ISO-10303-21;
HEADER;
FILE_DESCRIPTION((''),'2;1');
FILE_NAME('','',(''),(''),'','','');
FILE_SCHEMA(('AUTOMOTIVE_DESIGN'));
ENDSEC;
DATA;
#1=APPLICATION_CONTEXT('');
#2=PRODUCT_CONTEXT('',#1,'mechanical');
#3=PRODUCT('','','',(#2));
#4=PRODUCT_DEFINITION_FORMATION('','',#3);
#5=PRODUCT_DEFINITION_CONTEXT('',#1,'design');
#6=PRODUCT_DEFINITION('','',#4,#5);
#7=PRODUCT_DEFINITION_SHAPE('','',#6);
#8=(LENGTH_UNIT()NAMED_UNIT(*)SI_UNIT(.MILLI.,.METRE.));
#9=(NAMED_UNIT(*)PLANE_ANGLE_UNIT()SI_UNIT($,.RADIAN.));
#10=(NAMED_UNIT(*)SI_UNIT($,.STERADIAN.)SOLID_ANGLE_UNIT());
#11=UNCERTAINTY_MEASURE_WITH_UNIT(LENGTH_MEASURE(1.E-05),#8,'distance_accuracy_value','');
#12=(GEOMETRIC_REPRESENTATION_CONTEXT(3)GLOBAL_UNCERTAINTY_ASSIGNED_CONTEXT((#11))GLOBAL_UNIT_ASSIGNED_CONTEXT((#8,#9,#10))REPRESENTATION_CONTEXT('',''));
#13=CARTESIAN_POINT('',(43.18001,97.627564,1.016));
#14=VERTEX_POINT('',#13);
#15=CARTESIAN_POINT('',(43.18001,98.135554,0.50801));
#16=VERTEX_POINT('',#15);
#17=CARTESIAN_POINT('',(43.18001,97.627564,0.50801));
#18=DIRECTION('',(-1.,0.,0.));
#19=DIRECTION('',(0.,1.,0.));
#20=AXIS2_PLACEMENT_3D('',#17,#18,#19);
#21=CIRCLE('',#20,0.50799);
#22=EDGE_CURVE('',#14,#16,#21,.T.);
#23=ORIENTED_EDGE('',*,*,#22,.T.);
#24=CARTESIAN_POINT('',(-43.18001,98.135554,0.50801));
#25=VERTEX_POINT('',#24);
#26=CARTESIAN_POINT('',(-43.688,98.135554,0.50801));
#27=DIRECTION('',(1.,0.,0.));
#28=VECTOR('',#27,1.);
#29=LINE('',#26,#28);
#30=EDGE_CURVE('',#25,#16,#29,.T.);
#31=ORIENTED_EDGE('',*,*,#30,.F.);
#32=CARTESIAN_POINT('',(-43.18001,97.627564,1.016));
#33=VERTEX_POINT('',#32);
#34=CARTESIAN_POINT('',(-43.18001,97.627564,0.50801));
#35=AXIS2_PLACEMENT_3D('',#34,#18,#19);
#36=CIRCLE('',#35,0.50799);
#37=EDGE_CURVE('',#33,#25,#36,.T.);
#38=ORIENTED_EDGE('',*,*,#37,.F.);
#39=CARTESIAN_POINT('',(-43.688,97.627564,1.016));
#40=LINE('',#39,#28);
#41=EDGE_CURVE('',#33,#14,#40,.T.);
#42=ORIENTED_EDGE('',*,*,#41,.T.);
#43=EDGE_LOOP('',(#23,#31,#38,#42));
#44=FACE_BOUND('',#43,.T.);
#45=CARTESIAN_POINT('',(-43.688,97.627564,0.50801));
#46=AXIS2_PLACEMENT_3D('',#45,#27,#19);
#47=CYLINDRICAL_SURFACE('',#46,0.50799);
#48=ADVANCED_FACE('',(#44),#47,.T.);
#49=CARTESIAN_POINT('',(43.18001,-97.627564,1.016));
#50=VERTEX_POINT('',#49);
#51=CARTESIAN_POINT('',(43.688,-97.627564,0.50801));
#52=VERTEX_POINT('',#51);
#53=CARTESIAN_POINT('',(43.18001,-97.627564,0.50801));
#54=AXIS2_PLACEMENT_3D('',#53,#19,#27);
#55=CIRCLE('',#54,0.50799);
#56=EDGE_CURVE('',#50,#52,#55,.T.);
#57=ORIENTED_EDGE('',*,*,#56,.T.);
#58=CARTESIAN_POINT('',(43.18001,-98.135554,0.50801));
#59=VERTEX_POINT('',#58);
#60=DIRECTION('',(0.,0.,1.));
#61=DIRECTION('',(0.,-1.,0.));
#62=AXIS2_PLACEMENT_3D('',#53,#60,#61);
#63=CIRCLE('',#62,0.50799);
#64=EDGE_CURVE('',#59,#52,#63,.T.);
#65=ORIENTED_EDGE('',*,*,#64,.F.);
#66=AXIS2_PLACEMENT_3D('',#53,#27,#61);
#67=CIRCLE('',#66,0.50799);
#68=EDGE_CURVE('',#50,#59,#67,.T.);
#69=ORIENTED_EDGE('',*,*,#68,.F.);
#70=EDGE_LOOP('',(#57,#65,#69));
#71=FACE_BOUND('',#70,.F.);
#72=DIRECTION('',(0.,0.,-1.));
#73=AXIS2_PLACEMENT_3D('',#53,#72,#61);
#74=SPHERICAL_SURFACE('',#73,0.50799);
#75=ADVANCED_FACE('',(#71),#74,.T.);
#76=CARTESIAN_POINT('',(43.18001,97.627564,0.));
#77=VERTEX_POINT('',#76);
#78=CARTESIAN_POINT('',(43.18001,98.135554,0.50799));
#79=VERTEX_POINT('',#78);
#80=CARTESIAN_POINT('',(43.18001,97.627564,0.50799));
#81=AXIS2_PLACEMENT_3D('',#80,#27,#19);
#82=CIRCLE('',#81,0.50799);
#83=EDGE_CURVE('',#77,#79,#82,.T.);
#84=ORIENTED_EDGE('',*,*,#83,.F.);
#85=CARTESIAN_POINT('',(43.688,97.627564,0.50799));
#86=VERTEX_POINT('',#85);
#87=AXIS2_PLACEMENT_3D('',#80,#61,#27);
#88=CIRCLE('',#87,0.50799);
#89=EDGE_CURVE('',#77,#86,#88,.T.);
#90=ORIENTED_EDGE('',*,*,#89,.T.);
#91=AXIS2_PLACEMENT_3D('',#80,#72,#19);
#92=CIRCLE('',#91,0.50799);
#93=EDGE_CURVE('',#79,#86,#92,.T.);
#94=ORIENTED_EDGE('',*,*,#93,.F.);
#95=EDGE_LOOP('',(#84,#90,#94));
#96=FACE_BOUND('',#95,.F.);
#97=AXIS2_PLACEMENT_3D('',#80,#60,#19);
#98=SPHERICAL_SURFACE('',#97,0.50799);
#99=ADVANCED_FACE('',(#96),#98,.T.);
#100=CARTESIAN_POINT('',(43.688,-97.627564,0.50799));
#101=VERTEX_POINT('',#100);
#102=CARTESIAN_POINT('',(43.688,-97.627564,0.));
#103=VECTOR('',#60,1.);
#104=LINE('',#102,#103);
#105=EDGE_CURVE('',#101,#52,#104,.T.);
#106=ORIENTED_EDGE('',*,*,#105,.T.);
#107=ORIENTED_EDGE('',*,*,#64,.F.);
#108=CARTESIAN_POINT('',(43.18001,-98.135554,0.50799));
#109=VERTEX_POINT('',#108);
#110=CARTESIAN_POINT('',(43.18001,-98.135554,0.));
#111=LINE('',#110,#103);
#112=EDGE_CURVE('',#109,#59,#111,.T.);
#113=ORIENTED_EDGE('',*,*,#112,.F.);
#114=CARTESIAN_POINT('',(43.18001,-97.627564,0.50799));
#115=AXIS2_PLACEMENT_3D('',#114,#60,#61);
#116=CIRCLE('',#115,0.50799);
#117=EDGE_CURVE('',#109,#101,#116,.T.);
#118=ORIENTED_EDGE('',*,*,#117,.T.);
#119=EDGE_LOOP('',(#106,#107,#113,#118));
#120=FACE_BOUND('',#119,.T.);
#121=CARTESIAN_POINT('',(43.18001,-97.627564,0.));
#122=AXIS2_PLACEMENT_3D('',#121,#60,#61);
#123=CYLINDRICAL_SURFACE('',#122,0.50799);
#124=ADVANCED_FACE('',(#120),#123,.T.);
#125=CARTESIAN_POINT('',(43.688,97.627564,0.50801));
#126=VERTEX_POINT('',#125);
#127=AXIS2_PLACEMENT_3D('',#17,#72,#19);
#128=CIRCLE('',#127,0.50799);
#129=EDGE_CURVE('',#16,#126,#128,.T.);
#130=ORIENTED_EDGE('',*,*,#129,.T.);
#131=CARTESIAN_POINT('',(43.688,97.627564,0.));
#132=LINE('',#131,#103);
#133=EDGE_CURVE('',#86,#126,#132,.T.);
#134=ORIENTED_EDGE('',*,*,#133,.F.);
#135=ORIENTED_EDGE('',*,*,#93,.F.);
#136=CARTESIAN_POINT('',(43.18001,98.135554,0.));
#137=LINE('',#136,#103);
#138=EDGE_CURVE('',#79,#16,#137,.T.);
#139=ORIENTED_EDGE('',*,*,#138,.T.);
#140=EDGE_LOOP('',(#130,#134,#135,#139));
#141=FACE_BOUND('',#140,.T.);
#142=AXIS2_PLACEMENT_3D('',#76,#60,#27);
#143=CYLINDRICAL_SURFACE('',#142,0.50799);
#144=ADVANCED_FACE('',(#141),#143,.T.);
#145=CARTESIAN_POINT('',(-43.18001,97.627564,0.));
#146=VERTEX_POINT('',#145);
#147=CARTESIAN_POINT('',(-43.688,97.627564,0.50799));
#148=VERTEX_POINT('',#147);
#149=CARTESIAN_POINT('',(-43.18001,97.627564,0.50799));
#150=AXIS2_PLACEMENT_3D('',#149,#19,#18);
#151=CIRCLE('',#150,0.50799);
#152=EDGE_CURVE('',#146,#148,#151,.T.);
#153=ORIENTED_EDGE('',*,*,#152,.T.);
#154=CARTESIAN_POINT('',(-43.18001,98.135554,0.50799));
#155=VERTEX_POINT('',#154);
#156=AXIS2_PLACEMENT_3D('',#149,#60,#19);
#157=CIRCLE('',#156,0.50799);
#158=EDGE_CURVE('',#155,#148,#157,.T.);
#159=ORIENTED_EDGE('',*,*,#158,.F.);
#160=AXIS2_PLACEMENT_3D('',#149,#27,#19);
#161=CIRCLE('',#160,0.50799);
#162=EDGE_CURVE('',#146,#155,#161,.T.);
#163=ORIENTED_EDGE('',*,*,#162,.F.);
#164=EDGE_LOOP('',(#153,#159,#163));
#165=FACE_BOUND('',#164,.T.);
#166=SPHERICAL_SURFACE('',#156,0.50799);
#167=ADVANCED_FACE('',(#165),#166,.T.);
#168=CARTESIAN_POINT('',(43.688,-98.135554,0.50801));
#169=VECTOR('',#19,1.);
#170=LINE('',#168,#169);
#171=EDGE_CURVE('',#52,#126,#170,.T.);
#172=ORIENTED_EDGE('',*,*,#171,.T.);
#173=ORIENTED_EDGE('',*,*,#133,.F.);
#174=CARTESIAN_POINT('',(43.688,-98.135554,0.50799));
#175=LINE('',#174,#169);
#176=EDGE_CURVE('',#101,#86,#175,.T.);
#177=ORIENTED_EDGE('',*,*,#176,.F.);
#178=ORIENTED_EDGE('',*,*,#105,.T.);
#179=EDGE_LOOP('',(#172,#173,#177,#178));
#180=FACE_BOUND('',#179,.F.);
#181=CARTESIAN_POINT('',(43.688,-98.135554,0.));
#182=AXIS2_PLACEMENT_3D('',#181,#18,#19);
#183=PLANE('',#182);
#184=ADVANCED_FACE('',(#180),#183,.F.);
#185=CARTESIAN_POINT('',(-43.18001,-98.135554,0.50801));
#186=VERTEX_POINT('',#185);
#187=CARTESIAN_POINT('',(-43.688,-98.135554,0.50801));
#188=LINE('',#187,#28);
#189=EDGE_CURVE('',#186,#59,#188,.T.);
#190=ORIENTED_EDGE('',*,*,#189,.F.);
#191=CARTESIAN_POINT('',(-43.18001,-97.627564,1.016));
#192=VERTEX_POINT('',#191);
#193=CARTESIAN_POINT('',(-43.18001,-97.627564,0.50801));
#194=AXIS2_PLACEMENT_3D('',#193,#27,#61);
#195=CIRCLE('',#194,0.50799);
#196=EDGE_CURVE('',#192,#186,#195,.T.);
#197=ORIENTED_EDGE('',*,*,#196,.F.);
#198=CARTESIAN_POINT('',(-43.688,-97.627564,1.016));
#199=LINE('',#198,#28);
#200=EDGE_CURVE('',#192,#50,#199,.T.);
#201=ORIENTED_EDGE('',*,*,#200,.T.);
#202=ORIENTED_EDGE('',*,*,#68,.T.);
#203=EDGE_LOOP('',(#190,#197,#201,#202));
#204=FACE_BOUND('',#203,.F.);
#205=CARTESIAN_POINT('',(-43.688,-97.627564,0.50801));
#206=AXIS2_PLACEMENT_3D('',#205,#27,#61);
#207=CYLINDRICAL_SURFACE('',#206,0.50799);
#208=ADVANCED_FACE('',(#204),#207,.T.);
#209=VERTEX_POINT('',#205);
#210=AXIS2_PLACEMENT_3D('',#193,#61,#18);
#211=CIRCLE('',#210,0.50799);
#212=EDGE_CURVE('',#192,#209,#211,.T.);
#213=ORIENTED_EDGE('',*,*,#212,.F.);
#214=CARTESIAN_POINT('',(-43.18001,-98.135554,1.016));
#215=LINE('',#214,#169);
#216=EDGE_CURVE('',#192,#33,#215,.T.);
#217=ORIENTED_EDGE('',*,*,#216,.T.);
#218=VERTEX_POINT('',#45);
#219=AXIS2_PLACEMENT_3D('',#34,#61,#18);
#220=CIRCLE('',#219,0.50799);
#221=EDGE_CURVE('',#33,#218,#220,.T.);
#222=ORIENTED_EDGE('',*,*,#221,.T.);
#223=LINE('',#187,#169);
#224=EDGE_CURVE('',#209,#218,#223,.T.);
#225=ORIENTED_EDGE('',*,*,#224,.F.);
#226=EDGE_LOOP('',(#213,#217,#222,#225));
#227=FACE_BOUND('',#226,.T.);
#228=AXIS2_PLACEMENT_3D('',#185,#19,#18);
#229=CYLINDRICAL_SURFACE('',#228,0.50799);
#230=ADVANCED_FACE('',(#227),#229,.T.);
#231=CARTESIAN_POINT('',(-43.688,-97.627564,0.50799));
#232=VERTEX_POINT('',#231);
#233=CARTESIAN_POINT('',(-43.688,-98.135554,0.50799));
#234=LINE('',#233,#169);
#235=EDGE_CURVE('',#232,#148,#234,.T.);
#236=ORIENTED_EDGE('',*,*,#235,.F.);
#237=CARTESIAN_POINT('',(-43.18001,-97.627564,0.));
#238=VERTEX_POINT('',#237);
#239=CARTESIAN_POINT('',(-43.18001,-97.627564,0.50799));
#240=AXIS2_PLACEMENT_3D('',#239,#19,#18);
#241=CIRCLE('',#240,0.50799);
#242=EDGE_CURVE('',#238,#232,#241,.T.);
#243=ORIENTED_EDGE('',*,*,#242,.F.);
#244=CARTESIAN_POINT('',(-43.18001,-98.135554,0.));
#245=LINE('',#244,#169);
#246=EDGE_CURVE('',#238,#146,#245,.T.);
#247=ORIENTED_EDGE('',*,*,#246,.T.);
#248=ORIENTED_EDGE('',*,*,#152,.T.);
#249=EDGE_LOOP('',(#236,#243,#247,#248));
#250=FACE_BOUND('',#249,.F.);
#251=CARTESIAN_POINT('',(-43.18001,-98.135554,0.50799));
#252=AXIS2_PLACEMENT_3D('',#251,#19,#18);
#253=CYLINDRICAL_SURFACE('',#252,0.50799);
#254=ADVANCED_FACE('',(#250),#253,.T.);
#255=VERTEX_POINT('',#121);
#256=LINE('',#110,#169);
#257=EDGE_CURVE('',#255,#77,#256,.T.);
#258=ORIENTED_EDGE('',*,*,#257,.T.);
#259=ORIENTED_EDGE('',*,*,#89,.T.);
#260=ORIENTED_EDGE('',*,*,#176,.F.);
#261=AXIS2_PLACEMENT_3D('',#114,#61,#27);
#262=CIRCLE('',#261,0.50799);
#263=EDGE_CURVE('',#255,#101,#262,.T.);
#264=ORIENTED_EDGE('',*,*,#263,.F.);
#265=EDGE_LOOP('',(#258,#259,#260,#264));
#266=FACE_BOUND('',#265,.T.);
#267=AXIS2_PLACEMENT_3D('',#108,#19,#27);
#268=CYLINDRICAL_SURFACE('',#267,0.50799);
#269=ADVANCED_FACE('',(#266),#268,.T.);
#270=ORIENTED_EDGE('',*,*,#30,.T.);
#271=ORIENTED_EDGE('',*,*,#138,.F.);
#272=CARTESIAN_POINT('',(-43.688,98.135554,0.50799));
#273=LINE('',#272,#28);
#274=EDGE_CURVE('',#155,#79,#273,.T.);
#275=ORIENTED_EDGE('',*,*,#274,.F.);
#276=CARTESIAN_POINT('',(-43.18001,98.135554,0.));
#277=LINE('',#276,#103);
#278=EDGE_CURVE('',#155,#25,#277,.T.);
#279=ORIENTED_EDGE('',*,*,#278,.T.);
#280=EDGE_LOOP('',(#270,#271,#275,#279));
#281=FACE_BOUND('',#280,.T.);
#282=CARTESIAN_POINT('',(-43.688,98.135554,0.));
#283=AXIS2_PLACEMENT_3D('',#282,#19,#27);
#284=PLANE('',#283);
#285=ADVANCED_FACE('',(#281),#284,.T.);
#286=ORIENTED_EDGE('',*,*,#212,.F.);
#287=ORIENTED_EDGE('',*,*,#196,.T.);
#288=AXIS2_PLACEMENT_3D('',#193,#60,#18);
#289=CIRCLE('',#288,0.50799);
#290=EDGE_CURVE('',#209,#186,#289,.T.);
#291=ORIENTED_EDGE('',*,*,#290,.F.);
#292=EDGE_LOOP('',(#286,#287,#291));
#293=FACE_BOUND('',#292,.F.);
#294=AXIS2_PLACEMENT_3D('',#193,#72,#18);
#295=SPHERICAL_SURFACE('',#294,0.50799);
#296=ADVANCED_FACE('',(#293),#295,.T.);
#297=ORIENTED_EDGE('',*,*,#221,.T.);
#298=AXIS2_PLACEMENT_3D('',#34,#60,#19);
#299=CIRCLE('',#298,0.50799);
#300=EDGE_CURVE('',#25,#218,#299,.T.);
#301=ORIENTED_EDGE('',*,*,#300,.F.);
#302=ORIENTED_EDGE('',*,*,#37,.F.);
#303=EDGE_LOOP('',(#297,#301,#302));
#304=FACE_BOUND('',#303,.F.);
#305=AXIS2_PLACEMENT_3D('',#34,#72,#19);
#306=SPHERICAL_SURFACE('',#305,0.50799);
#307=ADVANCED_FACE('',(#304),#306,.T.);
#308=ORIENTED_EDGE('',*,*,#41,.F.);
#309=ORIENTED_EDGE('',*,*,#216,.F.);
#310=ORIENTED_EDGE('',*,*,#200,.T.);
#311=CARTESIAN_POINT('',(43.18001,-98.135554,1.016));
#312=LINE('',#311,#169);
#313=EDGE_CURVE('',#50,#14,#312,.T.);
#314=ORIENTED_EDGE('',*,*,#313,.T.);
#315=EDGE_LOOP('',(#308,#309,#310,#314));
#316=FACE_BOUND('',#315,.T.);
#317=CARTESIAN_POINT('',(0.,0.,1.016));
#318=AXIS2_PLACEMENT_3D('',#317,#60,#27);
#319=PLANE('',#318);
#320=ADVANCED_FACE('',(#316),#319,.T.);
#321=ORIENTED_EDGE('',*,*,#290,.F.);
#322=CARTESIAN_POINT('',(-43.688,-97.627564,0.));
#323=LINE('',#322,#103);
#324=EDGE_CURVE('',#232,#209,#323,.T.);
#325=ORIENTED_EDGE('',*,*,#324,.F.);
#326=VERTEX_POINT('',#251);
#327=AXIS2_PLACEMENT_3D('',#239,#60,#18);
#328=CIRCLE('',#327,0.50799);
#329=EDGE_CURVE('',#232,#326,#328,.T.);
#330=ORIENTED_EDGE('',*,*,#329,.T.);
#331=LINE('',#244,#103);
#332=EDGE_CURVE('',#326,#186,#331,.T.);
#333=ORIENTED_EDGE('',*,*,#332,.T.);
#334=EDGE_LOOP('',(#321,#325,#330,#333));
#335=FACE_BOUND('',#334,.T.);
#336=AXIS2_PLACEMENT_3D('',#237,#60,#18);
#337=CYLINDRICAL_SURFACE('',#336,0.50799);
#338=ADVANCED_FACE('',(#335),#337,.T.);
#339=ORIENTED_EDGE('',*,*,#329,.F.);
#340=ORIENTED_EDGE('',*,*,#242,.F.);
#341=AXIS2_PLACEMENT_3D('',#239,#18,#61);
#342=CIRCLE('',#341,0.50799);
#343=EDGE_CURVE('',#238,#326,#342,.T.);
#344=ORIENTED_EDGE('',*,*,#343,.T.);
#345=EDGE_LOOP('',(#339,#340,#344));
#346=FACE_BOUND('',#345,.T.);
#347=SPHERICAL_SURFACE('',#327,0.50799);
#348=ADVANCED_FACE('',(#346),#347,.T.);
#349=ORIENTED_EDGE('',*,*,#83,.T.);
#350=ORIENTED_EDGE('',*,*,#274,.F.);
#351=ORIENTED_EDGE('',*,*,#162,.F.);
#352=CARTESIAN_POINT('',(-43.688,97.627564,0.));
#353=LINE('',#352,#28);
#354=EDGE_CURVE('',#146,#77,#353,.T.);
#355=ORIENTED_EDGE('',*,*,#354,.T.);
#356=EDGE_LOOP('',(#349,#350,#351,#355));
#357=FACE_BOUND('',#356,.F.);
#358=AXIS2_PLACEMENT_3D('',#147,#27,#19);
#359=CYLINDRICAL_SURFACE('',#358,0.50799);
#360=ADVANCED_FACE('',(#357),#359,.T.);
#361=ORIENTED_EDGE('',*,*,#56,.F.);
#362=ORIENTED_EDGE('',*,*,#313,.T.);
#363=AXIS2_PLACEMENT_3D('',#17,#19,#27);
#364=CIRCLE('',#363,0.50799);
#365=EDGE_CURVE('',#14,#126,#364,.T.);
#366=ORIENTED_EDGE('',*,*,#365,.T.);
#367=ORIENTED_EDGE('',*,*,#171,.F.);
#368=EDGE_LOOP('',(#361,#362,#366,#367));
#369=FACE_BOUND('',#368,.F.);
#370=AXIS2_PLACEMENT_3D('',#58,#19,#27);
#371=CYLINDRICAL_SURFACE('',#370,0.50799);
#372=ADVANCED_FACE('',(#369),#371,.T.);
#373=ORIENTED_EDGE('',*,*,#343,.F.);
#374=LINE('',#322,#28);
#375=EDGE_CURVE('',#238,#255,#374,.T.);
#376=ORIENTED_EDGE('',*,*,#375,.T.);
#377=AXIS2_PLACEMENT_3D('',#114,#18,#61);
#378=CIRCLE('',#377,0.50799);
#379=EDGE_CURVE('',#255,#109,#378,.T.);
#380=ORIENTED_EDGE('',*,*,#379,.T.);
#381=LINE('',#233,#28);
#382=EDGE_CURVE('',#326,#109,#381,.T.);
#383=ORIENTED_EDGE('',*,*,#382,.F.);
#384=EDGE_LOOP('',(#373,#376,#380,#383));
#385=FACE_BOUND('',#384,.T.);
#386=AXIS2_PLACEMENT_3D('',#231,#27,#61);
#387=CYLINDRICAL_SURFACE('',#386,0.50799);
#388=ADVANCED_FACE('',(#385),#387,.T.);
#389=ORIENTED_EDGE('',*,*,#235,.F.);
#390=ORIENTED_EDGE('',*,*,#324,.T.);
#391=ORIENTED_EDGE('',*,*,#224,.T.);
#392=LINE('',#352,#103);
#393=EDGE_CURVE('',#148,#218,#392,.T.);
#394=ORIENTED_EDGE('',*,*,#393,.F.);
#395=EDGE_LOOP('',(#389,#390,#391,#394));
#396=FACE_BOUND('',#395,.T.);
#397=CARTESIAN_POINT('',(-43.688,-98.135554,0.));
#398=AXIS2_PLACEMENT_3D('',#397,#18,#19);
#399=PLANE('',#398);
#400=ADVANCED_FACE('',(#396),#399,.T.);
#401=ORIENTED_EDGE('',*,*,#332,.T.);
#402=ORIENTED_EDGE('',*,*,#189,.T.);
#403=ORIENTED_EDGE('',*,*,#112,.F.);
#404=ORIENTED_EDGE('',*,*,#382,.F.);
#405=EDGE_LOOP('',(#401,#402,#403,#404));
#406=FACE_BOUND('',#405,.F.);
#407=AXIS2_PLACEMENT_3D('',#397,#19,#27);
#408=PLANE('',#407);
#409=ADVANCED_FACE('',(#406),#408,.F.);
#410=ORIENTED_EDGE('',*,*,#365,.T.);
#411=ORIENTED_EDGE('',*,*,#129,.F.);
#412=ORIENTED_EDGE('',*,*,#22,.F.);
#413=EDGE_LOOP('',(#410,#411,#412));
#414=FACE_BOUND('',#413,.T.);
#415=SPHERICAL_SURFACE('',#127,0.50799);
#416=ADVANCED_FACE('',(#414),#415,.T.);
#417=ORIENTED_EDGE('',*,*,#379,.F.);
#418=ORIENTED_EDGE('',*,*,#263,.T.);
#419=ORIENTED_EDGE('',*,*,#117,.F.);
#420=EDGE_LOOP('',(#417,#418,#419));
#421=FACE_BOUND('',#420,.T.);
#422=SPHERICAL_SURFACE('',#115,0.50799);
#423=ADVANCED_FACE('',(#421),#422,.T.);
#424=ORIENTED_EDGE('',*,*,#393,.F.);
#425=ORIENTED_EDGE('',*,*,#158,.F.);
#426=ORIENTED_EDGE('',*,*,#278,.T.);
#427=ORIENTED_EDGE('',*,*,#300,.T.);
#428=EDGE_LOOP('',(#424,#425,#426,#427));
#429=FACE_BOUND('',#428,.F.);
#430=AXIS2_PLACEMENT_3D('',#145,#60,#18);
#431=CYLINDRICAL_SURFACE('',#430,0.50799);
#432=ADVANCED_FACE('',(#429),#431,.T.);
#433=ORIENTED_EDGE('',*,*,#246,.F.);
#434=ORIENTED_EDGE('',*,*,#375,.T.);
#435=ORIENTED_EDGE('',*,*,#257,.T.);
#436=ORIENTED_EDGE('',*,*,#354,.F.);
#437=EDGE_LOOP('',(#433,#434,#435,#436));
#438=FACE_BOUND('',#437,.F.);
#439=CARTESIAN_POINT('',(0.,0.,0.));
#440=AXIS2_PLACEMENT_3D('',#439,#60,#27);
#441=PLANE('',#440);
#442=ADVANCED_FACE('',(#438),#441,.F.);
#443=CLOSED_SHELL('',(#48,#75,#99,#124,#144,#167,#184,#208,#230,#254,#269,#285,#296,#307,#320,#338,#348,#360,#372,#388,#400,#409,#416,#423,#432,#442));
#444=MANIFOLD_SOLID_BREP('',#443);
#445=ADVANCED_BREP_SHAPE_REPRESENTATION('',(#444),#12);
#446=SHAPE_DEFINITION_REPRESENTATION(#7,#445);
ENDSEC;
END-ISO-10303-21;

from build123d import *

# Parameters (mm, degrees)
F0_W     = 87.376
F0_H     = 196.2711086
F1_DEPTH = 1.016
F2_R     = 0.50799


# Not quite as in the source:
# - a fillet or chamfer is up to 0.001 mm smaller than in the source, because OpenCascade refuses the exact size


with BuildPart() as f1:
    # F0 (on Top) → F1 (new body)
    with BuildSketch(Plane.XY):
        Rectangle(F0_W, F0_H)
    extrude(amount=F1_DEPTH)

    # F2 (radius 0.508 in the source; OpenCascade refuses exactly that, so slightly less here)
    f2_edges = [f1.edges().sort_by_distance(p)[0] for p in [
        (43.688, 98.135554, 0.508),
        (-43.688, 98.135554, 0.508),
        (0, 98.135554, 0),
        (0, 98.135554, 1.016),
        (-43.688, -98.135554, 0.508),
        (-43.688, 0, 0),
        (-43.688, 0, 1.016),
        (43.688, -98.135554, 0.508),
        (0, -98.135554, 0),
        (0, -98.135554, 1.016),
        (43.688, 0, 0),
        (43.688, 0, 1.016),
    ]]
    fillet(f2_edges, radius=F2_R)


solid = f1.part
